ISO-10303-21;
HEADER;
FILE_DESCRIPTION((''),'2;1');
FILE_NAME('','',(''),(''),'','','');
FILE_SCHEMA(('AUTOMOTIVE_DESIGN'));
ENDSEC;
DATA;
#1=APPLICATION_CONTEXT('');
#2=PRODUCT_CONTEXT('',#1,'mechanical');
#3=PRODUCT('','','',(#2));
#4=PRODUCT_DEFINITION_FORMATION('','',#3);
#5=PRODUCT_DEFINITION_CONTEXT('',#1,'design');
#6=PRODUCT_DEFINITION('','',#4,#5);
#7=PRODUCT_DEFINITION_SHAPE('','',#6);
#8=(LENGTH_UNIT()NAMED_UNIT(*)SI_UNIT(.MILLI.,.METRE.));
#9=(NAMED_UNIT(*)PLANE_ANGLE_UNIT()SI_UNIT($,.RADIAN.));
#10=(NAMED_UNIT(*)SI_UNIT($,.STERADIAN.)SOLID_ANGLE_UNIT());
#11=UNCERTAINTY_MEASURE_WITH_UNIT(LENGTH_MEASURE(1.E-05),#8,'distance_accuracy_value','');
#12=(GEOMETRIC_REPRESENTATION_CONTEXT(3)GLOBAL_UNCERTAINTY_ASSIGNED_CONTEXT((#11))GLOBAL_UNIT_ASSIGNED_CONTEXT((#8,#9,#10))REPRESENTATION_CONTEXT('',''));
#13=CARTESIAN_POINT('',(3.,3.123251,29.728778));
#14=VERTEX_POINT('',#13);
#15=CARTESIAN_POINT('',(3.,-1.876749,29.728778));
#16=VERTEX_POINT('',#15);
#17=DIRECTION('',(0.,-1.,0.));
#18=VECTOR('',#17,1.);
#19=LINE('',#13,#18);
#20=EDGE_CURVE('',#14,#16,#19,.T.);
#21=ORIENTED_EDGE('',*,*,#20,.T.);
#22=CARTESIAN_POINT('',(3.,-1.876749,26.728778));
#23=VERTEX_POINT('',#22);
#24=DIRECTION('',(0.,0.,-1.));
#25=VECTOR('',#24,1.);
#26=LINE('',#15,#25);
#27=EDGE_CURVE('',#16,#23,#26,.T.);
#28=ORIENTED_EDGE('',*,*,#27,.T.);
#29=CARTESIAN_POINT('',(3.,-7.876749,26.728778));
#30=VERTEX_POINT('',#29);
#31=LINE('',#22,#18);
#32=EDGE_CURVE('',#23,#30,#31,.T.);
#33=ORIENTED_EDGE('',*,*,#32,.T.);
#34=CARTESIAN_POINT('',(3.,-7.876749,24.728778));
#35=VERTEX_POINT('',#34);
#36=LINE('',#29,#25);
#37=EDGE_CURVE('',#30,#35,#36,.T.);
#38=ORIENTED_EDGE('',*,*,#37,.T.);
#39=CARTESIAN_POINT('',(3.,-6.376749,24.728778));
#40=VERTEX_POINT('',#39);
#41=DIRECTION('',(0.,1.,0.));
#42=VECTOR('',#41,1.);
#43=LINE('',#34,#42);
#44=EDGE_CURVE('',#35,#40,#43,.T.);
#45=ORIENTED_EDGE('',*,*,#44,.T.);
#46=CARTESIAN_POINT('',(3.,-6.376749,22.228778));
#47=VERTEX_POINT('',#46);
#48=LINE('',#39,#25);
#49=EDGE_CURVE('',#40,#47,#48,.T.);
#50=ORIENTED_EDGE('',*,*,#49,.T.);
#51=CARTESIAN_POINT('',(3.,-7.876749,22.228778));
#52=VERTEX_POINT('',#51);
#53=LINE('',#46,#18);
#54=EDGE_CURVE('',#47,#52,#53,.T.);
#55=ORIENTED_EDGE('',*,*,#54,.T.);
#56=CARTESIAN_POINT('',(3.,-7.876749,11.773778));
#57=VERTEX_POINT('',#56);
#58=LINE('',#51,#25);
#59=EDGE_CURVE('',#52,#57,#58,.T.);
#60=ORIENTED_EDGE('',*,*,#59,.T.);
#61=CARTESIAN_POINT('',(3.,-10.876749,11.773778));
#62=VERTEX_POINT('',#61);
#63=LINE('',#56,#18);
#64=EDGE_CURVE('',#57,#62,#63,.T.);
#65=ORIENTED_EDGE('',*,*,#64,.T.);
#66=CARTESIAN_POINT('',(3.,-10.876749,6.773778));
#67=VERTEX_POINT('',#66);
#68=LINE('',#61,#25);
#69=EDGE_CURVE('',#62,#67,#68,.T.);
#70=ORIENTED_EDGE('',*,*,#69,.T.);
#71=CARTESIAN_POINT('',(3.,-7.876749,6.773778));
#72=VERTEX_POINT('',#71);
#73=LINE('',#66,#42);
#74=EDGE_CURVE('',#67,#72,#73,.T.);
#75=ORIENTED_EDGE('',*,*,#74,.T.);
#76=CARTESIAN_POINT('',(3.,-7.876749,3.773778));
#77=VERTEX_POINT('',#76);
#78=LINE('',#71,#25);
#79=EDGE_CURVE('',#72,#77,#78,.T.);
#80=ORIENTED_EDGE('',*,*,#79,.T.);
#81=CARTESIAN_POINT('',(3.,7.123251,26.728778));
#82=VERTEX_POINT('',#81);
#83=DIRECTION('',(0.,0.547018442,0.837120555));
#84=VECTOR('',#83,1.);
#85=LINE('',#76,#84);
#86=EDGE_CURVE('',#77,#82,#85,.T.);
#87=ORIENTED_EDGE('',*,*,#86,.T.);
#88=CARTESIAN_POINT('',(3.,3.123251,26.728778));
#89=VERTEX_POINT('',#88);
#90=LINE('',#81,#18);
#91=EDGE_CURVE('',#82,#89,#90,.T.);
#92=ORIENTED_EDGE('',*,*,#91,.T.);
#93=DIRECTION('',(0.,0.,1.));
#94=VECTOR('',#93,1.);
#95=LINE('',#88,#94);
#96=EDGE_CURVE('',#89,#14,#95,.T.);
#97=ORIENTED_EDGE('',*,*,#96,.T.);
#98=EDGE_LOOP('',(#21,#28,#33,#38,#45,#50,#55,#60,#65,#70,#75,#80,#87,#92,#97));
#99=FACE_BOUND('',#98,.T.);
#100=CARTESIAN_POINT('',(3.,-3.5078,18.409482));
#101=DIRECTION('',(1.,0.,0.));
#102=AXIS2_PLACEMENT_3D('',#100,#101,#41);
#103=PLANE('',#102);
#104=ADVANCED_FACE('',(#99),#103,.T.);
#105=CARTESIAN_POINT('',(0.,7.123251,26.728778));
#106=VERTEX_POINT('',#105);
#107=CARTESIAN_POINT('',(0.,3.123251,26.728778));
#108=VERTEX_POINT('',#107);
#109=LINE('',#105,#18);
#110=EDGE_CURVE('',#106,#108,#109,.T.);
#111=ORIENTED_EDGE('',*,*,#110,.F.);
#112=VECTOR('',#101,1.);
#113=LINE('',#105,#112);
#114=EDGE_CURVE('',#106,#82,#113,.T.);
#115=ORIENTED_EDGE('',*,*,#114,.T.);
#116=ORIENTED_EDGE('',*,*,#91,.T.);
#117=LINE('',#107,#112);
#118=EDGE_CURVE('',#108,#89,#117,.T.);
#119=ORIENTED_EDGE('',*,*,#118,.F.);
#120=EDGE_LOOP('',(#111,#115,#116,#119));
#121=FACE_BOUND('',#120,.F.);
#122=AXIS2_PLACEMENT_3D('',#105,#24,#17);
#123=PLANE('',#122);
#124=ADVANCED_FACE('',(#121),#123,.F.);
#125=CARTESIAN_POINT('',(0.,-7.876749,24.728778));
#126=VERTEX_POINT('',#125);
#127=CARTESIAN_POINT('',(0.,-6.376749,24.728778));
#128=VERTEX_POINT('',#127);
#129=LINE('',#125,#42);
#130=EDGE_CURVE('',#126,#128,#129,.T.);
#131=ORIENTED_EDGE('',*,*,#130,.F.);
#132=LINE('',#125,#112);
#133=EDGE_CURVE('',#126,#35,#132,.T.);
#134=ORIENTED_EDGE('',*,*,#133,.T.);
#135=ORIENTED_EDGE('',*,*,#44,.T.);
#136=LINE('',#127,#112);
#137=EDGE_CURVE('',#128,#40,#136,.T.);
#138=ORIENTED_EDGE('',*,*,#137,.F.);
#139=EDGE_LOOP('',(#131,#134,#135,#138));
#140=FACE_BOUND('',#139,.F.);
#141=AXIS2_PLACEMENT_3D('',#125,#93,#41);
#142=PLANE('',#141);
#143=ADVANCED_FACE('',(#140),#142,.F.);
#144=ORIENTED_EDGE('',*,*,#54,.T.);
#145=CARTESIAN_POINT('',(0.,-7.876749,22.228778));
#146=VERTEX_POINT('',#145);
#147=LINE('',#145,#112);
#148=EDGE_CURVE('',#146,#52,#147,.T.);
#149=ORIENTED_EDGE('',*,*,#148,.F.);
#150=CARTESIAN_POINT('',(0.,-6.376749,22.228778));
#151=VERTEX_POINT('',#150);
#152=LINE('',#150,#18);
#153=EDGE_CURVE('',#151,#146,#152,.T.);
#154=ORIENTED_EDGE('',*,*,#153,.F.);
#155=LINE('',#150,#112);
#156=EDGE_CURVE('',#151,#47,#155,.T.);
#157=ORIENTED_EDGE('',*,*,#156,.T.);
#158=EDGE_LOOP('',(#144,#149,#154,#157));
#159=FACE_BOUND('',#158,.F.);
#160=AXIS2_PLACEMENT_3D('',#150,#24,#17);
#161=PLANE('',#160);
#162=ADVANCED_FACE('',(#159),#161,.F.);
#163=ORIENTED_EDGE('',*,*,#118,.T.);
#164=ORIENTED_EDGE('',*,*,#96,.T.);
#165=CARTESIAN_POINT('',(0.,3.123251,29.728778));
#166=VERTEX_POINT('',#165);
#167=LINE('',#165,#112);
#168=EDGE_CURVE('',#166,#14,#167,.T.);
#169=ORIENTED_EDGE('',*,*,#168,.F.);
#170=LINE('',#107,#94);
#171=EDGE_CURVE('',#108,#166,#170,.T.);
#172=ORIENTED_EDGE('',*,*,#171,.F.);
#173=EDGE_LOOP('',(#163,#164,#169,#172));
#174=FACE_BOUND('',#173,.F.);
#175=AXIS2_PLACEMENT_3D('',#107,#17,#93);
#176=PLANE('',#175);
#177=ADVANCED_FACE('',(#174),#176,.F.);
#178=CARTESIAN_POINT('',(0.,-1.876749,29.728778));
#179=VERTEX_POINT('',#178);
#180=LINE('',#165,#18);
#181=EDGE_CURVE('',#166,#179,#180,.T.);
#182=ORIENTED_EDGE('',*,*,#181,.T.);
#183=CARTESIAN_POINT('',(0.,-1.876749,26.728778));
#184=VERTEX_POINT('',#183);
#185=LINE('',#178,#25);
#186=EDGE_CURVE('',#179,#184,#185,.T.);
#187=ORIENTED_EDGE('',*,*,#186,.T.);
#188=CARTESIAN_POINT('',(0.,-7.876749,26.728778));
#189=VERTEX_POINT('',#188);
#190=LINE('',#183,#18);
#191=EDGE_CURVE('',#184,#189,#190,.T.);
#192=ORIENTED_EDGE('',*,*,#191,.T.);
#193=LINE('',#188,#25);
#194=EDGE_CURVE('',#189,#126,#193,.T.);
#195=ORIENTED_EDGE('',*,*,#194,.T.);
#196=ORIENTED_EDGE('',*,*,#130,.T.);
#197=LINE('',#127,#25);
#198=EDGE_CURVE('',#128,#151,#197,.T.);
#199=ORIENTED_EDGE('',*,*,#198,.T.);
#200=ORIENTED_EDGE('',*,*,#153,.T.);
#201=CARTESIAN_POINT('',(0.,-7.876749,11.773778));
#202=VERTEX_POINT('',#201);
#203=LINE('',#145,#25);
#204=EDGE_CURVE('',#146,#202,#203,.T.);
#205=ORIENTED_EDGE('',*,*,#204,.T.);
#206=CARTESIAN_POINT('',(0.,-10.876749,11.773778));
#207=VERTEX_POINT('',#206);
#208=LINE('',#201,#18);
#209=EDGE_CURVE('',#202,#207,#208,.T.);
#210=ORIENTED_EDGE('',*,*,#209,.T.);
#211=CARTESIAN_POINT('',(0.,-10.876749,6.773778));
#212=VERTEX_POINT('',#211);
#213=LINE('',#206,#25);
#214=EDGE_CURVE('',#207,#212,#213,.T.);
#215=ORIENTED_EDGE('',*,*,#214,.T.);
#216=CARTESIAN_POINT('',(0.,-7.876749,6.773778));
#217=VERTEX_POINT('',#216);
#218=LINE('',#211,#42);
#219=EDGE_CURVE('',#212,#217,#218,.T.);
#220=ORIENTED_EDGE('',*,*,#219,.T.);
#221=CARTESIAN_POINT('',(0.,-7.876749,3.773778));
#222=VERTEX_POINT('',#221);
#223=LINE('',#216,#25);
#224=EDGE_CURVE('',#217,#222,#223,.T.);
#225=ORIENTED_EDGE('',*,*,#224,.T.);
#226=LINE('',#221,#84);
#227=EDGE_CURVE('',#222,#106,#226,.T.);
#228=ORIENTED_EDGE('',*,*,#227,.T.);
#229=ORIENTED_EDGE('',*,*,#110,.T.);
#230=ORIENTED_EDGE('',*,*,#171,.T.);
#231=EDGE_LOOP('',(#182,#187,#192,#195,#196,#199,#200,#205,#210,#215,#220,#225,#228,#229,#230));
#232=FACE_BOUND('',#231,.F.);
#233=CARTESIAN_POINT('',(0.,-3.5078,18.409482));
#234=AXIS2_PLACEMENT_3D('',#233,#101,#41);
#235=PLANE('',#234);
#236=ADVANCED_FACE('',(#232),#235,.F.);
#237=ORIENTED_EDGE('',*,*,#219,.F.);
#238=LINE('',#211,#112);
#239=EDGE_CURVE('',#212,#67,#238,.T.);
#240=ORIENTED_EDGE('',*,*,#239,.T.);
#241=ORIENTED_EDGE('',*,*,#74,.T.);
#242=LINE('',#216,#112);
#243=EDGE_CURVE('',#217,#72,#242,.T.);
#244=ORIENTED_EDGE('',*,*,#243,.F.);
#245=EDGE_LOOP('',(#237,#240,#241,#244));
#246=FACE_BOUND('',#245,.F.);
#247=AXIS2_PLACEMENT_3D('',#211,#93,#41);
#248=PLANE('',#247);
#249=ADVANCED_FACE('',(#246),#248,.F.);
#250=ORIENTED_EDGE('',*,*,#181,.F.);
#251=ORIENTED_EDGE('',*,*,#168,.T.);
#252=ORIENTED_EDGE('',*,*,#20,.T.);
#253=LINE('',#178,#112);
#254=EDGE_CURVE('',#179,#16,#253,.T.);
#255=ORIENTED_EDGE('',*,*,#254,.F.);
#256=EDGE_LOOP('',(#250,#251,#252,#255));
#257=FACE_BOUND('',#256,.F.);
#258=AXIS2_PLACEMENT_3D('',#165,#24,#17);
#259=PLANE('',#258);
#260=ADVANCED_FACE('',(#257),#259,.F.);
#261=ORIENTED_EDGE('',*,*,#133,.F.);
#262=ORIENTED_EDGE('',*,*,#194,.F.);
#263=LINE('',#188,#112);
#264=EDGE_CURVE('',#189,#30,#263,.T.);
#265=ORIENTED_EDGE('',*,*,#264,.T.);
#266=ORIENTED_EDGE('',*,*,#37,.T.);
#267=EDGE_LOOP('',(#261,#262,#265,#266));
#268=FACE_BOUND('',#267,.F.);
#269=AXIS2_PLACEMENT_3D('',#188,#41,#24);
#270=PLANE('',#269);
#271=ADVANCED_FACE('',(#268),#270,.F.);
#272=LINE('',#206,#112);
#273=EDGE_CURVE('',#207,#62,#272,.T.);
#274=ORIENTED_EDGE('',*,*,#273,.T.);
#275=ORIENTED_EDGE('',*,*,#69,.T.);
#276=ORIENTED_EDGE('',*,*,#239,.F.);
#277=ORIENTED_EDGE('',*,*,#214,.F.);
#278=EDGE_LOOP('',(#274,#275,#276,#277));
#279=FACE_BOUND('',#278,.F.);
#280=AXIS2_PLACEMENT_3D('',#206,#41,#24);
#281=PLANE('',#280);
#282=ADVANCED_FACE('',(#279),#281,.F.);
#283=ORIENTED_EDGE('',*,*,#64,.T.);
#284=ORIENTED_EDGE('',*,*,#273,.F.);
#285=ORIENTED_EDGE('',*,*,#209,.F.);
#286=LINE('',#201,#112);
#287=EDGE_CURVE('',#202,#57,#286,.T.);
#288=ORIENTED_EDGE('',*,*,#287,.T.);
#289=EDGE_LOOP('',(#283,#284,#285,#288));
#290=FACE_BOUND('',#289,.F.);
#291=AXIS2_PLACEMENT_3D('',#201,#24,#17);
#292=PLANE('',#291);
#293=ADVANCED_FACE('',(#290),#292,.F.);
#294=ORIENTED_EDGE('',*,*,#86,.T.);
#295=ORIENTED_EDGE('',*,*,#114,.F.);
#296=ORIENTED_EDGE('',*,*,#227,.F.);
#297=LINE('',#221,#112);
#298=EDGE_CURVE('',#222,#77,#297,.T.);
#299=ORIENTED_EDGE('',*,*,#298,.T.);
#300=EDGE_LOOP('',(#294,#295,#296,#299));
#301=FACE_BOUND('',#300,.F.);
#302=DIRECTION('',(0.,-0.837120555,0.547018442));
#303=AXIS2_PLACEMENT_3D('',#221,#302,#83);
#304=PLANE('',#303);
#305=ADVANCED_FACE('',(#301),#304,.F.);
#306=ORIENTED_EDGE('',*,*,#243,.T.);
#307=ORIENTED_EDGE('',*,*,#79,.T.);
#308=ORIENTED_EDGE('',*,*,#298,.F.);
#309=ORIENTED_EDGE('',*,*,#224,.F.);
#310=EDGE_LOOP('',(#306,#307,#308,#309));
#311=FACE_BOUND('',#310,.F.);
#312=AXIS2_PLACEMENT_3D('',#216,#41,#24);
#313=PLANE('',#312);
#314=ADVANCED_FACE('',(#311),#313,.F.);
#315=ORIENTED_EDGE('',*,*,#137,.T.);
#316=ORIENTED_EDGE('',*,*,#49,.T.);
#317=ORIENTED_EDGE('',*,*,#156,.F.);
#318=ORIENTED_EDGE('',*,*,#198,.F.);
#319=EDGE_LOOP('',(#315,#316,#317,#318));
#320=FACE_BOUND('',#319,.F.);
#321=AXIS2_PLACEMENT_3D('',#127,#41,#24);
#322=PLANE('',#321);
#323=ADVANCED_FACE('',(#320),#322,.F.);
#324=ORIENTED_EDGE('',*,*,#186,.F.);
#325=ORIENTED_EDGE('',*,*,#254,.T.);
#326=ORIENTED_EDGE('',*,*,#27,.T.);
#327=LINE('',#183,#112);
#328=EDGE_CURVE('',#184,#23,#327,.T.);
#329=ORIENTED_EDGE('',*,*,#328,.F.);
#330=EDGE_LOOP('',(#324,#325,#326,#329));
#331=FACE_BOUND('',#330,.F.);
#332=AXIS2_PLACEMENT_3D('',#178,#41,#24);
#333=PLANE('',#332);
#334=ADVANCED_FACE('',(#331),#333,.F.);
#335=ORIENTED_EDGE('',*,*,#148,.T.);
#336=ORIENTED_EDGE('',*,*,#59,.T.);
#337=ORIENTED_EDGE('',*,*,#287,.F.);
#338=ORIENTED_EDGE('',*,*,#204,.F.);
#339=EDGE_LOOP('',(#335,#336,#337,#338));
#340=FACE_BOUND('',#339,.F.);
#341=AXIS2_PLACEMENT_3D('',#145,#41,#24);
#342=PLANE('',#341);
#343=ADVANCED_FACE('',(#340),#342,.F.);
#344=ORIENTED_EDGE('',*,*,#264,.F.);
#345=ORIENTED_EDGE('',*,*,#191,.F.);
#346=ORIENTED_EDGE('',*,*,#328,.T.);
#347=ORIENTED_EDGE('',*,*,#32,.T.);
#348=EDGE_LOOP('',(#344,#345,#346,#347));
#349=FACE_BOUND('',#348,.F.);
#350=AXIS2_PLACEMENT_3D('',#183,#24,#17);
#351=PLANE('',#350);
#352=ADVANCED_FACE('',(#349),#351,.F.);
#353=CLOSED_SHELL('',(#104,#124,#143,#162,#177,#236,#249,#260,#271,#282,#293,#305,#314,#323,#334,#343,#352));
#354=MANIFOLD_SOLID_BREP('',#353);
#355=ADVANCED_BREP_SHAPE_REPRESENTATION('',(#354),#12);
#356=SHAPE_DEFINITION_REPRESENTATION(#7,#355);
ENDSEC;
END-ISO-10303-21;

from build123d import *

# Parameters (mm, degrees)
F1_DEPTH = 3


# Not quite as in the source:
# - a feature names something its author has since deleted; it is built from what else it names


with BuildPart() as f1:
    # F0 (on Right) → F1 (new body)
    with BuildSketch(Plane.YZ):
        Polygon((-1.8767494946, 26.7287779992), (-7.8767494946, 26.7287779992), (-7.8767494946, 24.7287779992), (-6.3767494946, 24.7287779992), (-6.3767494946, 22.2287779992), (-7.8767494946, 22.2287779992), (-7.8767494946, 11.7737779992), (-10.8767494946, 11.7737779992), (-10.8767494946, 6.7737779992), (-7.8767494946, 6.7737779992), (-7.8767494946, 3.7737779992), (7.1232505054, 26.7287779992), (3.1232505054, 26.7287779992), (3.1232505054, 29.7287779992), (-1.8767494946, 29.7287779992), align=None)
    extrude(amount=F1_DEPTH)


solid = f1.part
